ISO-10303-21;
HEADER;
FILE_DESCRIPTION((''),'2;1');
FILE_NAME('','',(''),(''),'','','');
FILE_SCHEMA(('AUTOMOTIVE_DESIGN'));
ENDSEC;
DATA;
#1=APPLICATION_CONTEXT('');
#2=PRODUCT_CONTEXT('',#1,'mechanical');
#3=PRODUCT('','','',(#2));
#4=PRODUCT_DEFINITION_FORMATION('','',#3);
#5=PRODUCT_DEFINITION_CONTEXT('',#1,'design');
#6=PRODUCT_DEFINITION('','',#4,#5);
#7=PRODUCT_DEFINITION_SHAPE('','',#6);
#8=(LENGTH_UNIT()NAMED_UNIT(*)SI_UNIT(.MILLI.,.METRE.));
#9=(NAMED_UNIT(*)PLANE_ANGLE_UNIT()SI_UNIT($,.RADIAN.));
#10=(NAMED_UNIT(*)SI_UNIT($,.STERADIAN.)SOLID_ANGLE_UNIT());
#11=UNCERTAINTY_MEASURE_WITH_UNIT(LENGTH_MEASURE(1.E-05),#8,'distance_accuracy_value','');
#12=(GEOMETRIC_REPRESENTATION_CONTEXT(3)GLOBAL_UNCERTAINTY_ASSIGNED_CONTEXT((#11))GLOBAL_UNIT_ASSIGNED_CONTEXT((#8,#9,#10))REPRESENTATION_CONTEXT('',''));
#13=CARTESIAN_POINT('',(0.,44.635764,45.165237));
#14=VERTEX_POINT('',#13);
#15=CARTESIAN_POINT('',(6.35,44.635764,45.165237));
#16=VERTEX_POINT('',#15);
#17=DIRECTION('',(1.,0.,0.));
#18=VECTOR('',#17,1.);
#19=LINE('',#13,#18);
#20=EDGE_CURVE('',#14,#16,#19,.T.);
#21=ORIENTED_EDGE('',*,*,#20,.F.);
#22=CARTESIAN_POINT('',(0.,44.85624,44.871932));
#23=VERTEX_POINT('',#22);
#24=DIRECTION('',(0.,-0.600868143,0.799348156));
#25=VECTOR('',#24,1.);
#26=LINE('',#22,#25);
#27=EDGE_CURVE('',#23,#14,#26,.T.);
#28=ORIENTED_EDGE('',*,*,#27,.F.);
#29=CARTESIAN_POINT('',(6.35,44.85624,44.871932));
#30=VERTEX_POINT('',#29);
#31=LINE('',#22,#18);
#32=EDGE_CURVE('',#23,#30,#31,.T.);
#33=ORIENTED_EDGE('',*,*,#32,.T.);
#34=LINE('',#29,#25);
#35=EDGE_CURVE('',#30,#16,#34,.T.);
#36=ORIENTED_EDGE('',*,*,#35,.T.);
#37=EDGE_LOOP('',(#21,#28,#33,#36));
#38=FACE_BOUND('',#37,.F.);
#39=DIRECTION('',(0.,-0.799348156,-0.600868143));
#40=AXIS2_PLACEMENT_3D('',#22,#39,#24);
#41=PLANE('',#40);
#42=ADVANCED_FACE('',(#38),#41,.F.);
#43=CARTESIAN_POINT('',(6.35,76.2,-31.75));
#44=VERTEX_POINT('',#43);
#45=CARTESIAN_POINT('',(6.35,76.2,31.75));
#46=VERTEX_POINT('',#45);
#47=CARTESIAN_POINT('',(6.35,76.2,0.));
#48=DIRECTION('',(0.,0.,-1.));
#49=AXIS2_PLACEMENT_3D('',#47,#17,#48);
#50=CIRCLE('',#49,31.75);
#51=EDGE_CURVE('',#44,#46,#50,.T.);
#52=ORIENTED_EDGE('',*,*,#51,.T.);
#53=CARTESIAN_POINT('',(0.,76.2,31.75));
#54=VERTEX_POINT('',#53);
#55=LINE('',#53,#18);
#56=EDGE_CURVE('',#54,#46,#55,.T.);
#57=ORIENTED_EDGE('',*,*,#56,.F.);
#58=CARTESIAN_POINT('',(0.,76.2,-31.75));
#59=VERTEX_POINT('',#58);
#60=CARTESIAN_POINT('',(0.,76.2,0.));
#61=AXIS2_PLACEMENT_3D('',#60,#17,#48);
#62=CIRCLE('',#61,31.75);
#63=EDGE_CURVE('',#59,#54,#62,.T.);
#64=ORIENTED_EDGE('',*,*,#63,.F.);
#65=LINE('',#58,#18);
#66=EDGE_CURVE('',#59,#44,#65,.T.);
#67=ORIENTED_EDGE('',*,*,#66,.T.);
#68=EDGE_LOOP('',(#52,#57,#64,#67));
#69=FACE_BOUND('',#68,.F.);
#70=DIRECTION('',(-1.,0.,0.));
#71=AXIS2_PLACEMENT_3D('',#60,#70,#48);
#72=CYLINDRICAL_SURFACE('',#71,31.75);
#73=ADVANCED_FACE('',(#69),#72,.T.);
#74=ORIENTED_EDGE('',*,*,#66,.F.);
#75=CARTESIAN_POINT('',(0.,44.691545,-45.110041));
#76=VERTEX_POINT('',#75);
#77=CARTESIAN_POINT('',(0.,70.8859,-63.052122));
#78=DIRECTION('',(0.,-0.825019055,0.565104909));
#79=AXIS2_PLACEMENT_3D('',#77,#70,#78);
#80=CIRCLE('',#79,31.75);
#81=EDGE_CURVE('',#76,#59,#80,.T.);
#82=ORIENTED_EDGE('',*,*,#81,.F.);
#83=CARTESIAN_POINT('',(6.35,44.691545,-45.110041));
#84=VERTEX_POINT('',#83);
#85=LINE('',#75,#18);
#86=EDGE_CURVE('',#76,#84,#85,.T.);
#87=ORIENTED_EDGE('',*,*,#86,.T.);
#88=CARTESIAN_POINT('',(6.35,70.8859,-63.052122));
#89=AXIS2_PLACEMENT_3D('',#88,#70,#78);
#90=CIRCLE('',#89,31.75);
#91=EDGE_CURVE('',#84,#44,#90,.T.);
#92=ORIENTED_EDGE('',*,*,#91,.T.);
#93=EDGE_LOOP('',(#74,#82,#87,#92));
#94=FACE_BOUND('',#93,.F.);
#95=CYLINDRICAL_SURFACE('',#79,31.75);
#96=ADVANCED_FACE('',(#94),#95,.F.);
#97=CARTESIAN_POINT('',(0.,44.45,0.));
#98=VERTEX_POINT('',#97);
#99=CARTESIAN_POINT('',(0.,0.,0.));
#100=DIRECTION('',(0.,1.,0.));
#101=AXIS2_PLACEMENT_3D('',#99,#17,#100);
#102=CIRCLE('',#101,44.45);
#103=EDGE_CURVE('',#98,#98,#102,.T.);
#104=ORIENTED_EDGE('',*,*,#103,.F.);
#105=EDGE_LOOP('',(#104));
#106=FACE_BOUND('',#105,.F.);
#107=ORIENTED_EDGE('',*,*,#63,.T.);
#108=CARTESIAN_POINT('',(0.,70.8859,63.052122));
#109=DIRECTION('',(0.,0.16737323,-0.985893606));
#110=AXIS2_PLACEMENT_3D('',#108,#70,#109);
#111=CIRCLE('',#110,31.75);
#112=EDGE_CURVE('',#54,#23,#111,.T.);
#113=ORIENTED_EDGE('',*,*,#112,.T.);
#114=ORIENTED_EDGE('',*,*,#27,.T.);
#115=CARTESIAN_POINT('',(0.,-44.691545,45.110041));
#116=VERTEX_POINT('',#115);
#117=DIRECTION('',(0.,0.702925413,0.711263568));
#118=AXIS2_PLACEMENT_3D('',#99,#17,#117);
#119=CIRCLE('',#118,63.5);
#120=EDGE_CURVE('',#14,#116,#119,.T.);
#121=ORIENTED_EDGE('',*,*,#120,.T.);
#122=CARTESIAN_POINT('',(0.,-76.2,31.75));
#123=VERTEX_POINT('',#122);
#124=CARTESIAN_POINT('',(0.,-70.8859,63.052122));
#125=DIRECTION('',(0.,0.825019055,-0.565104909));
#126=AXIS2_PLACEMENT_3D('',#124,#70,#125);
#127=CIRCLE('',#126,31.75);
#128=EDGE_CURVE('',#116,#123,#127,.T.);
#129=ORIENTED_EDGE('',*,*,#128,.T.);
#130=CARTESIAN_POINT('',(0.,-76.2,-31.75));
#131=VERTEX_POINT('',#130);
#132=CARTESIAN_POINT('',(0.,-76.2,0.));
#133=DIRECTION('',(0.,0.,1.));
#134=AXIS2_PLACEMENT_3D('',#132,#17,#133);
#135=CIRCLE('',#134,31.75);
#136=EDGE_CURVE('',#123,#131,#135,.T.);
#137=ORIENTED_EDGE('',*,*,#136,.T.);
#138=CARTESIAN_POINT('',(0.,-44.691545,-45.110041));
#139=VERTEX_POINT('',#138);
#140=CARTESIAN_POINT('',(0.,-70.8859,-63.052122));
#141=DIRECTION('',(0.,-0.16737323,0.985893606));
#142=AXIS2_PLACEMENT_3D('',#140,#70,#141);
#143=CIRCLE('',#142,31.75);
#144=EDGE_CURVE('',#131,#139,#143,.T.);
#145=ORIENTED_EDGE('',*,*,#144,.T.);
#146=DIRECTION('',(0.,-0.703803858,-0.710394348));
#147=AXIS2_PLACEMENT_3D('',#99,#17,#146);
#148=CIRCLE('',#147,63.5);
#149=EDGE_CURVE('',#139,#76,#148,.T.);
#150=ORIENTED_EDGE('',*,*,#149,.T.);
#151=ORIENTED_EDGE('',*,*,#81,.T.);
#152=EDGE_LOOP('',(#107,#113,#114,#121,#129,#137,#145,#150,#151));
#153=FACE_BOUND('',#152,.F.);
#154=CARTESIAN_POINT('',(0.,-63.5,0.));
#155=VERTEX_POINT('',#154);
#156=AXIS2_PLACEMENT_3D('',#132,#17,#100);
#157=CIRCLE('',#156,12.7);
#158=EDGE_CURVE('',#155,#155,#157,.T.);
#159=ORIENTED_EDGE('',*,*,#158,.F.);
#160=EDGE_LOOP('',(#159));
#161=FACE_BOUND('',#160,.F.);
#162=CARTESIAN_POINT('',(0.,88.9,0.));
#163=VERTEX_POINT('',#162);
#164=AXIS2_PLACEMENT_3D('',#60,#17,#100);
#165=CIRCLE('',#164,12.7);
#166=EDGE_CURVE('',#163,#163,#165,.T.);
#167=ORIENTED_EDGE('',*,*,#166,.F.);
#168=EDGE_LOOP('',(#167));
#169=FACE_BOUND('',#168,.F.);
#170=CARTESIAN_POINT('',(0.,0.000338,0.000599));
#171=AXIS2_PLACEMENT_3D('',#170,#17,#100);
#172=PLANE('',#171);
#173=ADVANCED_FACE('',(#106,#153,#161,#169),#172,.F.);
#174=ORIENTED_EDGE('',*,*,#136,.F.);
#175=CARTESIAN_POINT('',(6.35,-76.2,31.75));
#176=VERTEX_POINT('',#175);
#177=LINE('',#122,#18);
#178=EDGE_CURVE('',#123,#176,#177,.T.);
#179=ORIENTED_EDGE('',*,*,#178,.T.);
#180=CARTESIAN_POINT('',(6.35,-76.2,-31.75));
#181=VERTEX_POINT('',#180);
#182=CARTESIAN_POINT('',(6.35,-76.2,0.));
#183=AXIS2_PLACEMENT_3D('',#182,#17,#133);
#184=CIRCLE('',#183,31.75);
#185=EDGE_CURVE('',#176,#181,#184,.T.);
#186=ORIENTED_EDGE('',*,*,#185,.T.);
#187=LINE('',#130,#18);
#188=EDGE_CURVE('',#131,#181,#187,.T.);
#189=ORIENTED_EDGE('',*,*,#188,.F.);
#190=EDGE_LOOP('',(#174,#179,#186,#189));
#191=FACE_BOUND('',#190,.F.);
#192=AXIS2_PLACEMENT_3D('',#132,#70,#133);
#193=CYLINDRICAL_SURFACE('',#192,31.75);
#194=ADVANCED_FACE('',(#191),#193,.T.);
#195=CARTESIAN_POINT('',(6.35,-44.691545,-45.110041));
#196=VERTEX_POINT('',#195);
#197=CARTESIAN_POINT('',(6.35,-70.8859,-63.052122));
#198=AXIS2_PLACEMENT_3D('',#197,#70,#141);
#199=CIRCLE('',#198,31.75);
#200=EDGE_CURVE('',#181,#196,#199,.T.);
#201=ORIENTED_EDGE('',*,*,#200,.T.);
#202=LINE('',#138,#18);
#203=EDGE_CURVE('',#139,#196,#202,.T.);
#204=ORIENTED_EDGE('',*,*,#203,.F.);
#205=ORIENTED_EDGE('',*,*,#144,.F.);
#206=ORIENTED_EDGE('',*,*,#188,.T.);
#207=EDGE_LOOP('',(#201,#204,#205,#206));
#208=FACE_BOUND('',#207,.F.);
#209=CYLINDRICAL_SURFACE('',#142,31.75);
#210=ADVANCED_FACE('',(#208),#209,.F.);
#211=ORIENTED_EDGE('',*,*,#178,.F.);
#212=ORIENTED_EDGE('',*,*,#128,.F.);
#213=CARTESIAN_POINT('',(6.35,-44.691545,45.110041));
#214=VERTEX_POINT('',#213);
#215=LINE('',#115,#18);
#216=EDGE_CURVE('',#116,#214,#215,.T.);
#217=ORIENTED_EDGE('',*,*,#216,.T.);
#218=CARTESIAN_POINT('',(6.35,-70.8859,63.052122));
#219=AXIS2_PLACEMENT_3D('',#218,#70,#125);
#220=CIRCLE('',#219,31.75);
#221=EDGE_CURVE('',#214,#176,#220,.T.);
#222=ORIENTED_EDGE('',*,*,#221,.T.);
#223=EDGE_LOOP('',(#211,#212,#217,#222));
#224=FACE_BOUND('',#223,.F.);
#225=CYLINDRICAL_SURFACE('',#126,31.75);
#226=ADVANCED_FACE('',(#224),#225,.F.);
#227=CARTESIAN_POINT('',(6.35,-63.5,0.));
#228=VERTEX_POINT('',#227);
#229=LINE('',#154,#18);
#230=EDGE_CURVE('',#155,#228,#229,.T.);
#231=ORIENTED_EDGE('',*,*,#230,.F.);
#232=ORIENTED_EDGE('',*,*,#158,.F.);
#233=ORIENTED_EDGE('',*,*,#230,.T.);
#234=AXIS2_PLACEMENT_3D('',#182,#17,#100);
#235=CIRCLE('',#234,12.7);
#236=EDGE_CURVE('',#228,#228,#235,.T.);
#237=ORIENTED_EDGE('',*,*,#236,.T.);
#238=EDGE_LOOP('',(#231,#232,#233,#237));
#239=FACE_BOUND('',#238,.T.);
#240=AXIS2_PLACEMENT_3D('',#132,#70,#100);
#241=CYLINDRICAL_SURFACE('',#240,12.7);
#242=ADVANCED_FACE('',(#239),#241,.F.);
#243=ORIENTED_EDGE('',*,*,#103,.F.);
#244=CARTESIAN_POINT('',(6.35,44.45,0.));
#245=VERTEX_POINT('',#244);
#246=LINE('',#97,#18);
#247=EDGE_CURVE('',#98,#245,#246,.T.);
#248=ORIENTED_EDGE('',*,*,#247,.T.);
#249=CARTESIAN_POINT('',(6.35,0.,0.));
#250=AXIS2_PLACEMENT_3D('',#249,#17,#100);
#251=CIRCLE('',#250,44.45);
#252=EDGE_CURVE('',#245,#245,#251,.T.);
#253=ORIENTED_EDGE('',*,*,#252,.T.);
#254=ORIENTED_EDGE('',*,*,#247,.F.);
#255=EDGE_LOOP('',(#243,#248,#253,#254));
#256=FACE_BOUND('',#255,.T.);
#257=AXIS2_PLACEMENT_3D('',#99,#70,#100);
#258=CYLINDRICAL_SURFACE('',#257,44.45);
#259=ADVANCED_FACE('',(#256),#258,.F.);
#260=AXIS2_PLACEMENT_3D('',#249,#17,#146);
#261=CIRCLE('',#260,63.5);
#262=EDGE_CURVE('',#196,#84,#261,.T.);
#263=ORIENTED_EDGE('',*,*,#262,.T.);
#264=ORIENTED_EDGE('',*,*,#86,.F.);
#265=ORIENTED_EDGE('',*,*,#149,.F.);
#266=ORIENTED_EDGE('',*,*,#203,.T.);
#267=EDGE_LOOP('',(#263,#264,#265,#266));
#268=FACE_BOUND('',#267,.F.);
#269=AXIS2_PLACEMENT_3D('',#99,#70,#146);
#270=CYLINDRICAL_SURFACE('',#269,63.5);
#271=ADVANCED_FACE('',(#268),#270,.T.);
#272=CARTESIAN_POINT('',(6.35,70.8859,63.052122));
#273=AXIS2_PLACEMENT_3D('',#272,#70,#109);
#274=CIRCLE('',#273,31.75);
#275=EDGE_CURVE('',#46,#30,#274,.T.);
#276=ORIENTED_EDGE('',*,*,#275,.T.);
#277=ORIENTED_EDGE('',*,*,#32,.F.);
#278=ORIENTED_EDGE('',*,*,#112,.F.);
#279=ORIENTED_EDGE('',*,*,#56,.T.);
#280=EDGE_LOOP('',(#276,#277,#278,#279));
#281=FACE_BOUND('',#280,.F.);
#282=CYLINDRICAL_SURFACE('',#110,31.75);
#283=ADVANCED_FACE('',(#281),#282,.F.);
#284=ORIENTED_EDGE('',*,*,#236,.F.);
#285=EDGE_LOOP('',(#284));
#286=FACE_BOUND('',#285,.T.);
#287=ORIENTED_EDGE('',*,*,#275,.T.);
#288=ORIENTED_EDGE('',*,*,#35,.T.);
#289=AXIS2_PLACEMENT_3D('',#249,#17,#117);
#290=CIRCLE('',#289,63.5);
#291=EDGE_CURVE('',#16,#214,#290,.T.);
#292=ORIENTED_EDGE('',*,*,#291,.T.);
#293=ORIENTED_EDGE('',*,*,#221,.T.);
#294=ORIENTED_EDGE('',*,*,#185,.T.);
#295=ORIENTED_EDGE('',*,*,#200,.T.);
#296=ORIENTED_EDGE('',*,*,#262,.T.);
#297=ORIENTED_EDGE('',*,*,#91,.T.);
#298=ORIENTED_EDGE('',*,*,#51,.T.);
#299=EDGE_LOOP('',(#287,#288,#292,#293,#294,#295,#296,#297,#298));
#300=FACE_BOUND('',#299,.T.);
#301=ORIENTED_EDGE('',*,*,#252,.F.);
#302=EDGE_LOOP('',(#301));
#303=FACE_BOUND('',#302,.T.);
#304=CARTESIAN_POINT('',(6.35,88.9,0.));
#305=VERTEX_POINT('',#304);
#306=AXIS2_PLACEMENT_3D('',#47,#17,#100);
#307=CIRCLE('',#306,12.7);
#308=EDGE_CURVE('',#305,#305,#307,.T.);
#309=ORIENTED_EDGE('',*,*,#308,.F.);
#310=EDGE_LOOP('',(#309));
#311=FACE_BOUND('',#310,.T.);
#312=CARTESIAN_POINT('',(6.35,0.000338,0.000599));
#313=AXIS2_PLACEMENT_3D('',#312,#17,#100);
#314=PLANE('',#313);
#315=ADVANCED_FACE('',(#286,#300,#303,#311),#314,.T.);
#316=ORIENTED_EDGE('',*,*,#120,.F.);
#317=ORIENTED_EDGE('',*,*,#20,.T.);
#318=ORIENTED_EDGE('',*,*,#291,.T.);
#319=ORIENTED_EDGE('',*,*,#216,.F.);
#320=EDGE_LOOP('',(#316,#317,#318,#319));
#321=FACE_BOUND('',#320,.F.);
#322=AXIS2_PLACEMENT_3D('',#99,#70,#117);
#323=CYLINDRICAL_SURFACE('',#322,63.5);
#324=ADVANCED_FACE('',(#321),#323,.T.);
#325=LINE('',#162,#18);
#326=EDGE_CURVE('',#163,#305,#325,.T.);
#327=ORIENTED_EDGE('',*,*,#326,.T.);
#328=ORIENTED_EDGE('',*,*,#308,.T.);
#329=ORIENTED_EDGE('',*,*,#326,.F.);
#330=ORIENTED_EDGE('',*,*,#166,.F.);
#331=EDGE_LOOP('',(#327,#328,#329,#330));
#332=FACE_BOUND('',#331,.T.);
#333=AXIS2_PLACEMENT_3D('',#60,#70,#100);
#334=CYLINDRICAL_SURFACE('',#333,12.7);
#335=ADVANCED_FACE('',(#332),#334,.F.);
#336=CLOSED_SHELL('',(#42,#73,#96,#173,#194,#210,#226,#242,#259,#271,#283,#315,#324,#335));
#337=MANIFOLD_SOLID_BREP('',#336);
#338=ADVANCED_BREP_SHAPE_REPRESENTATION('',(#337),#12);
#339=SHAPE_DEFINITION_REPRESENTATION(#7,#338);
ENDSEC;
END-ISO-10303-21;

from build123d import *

# Parameters (mm, degrees)
F0_R     = 12.7
F0_R_2   = 44.45
F1_DEPTH = 6.35


# Not quite as in the source:
# - a length typed as a fraction of an inch, garbled in the dataset ("3 / 203.2 mm" for 3/8 in), is restored


with BuildPart() as f1:
    # F0 (on Right) → F1 (new body)
    with BuildSketch(Plane.YZ):
        with BuildLine():
            Line((44.8562400312, 44.8719321083), (44.6357637569, 45.1652365635))
            ThreePointArc((44.6357637569, 45.1652365635), (-0.039236718, 63.4999878778), (-44.6915449582, 45.1100411133))
            ThreePointArc((-44.6915449582, 45.1100411133), (-58.4915893115, 33.8212553621), (-76.2, 31.75))
            ThreePointArc((-76.2, 31.75), (-107.95, 0), (-76.2, -31.75))
            ThreePointArc((-76.2, -31.75), (-58.4915893115, -33.8212553621), (-44.6915449582, -45.1100411133))
            ThreePointArc((-44.6915449582, -45.1100411133), (0, -63.5), (44.6915449582, -45.1100411133))
            ThreePointArc((44.6915449582, -45.1100411133), (58.4915893115, -33.8212553621), (76.2, -31.75))
            ThreePointArc((76.2, -31.75), (107.95, 0), (76.2, 31.75))
            ThreePointArc((76.2, 31.75), (58.6249913094, 33.7650494266), (44.8562400312, 44.8719321083))
        make_face()
        with Locations((-76.2, 0)):
            Circle(F0_R, mode=Mode.SUBTRACT)
        Circle(F0_R_2, mode=Mode.SUBTRACT)
        with Locations((76.2, 0)):
            Circle(F0_R, mode=Mode.SUBTRACT)
    extrude(amount=F1_DEPTH)


solid = f1.part
